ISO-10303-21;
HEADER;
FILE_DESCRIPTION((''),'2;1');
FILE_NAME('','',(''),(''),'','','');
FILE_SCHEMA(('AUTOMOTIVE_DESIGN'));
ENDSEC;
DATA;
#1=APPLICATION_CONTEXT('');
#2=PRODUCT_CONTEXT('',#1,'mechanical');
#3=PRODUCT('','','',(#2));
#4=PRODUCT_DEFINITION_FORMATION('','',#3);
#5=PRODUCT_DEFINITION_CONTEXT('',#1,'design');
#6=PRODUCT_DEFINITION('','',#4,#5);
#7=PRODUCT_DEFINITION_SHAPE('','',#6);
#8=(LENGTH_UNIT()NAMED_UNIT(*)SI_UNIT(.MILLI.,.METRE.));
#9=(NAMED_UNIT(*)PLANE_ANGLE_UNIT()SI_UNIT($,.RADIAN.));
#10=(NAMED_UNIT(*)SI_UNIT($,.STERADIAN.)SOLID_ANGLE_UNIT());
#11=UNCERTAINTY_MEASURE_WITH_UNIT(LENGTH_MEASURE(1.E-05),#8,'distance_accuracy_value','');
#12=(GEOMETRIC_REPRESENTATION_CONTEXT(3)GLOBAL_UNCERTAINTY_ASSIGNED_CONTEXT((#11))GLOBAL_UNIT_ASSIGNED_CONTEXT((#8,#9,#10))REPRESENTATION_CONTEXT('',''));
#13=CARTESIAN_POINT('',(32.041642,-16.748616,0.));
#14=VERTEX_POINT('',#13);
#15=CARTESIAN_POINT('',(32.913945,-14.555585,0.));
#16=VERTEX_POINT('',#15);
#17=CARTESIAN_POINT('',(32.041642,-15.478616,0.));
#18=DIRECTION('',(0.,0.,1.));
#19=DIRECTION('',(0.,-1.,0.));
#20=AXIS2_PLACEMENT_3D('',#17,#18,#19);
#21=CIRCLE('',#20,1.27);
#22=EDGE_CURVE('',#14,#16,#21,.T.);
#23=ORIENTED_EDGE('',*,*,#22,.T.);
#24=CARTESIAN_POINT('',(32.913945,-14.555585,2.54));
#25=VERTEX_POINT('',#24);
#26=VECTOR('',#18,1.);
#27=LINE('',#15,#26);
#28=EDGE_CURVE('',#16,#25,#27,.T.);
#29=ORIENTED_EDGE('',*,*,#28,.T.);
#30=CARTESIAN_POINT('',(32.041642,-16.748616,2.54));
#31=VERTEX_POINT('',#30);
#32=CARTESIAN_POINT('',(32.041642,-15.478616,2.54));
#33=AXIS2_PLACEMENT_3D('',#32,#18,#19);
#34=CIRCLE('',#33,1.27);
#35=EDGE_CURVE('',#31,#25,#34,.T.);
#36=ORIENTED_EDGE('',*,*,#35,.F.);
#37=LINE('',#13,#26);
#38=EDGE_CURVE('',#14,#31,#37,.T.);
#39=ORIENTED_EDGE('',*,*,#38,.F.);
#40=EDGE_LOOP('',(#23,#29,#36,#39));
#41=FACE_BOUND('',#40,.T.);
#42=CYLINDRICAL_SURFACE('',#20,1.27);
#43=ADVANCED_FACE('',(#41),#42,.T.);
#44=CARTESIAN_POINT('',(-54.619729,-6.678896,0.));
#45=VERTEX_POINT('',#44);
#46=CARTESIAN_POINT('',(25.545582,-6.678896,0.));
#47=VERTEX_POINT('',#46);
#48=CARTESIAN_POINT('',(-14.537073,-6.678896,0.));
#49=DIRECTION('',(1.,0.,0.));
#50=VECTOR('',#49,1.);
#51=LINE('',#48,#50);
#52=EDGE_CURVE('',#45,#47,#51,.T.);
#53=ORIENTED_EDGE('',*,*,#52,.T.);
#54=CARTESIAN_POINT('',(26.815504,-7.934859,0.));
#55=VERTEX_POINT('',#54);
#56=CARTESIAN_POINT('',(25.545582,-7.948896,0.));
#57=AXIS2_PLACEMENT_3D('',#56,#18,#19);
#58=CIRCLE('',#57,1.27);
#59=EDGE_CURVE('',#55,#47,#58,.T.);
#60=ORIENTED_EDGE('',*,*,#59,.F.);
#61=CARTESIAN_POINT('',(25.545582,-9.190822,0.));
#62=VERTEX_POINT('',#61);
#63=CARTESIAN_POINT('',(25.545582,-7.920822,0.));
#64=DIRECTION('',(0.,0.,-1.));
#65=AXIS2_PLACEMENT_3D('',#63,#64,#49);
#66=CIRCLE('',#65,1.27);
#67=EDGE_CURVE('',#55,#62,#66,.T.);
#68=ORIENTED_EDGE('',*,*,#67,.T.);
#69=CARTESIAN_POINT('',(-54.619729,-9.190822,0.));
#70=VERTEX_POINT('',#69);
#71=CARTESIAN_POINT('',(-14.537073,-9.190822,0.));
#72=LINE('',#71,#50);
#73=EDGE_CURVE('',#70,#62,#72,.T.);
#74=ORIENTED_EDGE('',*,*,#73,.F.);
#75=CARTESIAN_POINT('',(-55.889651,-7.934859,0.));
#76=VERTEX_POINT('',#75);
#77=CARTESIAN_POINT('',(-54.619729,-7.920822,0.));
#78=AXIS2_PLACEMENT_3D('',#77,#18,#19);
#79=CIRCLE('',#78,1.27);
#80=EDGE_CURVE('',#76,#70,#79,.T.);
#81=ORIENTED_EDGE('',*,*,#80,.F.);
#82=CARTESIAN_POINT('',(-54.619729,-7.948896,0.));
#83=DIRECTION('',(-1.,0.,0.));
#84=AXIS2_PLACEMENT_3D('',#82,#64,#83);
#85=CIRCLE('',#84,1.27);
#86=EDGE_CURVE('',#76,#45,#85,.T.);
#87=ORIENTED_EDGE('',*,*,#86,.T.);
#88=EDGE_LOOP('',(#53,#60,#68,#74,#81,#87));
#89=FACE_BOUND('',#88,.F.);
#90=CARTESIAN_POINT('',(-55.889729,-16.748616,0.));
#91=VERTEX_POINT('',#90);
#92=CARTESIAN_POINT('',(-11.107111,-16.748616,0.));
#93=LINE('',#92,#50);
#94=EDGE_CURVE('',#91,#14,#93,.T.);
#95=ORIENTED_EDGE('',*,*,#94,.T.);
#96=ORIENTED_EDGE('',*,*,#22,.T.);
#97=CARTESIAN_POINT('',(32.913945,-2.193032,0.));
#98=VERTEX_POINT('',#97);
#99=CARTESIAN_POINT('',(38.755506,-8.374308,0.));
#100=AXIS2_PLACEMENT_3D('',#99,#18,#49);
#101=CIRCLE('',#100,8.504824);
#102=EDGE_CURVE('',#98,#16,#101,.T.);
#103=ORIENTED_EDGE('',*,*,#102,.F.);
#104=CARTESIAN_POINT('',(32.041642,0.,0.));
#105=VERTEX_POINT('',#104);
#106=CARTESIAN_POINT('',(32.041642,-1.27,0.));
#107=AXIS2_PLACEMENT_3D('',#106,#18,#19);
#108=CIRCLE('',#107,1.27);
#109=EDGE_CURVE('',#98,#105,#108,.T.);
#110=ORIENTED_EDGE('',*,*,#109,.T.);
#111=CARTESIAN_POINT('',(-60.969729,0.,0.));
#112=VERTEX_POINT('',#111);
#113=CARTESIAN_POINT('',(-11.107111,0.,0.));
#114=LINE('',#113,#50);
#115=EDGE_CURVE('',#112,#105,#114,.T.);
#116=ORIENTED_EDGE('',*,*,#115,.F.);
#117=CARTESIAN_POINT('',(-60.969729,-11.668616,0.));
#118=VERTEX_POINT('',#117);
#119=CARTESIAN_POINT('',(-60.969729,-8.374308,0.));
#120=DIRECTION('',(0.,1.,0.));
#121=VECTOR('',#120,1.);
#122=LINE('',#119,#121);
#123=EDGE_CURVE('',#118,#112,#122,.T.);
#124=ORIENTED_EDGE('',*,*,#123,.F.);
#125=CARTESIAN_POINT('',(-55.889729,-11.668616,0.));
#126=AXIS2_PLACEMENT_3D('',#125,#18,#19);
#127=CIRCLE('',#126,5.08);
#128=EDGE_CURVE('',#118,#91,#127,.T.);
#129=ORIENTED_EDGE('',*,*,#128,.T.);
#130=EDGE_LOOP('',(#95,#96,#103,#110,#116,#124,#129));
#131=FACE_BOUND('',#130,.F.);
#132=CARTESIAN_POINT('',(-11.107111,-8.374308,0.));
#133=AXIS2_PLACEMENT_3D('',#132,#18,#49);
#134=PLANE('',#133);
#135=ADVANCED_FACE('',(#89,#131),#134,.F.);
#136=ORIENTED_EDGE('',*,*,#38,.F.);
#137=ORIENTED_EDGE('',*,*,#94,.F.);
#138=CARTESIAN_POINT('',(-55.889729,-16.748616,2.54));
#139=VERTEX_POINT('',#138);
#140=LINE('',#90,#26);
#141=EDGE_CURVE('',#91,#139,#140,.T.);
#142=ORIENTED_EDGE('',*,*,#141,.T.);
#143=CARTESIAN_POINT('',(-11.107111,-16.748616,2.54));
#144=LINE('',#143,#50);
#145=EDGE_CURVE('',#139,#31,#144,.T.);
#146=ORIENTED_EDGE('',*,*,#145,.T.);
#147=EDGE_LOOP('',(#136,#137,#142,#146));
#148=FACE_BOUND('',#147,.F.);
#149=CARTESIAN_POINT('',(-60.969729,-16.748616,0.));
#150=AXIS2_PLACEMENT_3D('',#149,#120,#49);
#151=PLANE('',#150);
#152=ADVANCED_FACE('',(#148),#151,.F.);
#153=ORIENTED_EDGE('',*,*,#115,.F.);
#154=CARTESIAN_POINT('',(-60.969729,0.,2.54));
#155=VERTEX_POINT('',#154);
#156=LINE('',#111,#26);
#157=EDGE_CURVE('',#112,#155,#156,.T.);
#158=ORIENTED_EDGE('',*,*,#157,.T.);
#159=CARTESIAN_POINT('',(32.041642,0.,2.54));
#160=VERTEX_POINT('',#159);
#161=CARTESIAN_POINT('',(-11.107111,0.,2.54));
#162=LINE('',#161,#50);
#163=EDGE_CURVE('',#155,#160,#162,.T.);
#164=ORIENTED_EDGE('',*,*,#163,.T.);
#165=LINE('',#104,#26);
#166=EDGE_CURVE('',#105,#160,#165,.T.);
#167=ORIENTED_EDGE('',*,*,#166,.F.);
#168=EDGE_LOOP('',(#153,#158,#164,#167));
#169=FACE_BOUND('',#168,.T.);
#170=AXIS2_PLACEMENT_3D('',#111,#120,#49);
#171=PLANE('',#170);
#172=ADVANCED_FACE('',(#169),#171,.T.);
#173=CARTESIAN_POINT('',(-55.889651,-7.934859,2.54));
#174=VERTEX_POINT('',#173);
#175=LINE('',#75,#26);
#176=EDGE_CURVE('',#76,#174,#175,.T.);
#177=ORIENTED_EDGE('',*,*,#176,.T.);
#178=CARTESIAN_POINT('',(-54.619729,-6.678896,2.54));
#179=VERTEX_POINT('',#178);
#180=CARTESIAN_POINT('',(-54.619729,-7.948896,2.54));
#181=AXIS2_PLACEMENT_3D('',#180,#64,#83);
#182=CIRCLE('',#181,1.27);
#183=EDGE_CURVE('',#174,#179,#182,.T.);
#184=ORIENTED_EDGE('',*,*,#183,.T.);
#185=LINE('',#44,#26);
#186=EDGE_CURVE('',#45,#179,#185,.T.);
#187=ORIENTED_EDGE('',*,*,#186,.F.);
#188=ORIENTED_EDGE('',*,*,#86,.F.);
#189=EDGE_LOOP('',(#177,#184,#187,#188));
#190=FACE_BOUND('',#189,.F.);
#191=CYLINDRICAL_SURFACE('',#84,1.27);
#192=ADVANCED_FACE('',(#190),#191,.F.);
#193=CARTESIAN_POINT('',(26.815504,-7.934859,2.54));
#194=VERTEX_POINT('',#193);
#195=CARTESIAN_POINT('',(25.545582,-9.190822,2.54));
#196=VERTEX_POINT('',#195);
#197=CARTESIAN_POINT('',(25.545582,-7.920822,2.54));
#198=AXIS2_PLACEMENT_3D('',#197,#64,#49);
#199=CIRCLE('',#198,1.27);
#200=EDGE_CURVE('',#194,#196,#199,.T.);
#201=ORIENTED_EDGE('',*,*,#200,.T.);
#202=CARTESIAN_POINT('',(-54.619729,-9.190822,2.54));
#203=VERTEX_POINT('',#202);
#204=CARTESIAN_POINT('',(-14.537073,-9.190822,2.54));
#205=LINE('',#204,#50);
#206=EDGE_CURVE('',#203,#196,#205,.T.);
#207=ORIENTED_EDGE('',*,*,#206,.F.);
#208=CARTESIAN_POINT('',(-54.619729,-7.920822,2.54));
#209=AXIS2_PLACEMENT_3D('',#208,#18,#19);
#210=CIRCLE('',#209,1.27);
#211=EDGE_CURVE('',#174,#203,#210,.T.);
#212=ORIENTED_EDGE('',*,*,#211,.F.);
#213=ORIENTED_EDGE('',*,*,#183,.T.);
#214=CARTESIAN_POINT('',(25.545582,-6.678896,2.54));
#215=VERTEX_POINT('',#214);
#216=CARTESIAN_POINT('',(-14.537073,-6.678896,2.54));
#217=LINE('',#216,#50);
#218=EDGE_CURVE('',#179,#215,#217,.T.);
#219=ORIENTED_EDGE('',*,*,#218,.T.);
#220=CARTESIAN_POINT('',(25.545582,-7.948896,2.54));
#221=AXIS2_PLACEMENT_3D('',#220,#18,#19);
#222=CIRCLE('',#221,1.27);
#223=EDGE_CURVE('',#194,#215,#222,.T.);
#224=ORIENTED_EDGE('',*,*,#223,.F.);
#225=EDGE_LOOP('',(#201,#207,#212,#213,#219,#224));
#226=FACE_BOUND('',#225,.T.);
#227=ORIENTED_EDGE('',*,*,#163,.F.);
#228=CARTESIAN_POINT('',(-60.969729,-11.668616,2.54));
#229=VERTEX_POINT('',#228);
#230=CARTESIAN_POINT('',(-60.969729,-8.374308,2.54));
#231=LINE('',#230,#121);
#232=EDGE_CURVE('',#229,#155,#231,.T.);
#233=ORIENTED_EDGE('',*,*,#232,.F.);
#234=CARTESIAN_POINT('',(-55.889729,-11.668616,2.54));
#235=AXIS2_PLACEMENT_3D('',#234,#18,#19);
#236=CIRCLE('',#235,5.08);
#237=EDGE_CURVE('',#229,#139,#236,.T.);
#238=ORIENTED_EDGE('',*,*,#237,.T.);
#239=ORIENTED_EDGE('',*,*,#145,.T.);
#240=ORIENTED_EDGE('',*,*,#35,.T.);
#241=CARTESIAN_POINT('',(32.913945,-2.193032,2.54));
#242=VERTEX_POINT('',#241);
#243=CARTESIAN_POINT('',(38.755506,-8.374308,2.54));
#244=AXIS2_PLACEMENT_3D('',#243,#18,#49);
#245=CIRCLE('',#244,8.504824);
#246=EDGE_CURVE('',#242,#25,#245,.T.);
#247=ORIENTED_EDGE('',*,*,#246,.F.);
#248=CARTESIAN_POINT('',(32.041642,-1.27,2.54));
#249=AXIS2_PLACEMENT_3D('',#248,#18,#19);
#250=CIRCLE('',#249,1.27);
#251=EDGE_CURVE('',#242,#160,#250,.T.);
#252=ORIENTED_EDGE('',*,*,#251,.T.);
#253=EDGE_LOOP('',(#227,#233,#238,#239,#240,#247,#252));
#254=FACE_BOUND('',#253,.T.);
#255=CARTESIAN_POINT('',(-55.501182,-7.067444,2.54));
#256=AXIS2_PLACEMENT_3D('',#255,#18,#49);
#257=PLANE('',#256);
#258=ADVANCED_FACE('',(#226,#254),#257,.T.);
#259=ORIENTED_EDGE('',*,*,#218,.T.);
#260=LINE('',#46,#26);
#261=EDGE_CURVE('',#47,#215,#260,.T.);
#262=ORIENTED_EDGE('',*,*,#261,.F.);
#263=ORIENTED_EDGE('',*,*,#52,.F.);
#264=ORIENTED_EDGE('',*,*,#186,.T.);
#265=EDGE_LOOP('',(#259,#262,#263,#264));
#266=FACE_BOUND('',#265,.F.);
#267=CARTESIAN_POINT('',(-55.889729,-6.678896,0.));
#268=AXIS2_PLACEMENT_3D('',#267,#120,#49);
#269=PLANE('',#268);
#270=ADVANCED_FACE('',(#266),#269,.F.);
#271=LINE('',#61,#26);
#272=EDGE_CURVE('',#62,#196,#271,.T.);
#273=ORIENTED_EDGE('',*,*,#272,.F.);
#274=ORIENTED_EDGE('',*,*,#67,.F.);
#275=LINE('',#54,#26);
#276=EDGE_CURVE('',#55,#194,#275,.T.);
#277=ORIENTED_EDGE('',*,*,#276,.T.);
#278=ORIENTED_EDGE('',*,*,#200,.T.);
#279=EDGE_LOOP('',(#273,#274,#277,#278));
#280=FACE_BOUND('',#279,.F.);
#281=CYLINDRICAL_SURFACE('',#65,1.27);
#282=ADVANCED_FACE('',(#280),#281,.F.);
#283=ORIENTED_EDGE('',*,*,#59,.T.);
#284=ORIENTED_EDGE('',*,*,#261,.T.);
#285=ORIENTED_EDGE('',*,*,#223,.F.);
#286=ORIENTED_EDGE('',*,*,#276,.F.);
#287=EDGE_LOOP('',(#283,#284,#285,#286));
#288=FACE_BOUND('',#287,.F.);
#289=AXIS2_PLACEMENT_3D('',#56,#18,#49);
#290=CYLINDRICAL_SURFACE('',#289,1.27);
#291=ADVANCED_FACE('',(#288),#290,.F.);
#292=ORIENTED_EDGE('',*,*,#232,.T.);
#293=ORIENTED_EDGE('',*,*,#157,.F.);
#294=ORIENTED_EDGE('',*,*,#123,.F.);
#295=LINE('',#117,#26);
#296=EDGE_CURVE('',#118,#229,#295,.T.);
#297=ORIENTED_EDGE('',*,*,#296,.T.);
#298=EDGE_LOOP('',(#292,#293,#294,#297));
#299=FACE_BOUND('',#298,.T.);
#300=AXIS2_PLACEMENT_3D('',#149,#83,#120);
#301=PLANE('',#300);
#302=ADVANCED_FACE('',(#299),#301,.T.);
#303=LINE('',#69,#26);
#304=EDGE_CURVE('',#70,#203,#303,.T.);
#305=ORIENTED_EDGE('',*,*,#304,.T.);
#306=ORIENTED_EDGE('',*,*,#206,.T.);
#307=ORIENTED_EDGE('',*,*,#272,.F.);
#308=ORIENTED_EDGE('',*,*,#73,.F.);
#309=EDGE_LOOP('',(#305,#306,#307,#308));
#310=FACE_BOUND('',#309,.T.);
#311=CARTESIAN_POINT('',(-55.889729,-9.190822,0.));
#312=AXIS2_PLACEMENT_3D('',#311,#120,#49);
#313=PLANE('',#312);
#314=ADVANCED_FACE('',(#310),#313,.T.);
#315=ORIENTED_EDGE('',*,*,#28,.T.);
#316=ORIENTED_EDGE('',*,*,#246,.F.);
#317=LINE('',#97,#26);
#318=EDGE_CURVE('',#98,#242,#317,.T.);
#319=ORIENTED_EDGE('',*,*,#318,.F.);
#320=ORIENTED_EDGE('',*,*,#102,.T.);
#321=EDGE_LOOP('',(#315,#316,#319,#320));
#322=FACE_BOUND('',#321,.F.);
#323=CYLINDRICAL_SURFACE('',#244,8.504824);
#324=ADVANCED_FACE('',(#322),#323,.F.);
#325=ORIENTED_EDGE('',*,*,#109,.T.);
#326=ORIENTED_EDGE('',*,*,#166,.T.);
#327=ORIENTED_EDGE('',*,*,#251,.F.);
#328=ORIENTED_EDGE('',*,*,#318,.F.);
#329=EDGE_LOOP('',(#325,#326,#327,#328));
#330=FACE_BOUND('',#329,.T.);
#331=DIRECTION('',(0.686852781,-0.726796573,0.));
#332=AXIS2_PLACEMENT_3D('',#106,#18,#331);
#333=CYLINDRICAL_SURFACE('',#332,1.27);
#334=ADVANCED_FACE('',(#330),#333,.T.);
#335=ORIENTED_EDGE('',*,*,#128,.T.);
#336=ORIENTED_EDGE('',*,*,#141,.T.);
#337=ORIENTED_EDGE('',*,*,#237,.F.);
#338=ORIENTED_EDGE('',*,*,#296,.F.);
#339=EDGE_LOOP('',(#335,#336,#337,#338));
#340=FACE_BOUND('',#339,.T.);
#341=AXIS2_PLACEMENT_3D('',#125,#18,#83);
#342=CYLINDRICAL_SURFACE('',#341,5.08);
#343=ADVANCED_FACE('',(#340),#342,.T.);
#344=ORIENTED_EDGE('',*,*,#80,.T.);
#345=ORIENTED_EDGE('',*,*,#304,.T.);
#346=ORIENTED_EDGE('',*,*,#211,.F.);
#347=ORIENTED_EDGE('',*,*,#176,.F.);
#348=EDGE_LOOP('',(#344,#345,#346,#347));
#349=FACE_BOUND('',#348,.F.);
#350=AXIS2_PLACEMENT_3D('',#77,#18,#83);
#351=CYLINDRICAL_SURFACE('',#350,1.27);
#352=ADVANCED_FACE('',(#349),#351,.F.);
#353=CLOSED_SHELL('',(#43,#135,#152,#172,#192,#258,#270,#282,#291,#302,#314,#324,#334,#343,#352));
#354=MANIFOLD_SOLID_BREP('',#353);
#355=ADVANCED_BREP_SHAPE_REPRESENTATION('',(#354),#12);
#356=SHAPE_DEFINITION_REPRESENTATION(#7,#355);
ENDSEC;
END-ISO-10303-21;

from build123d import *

# Parameters (mm, degrees)
F0_W         = 99.7252352536
F0_H         = 16.7486164719
F1_DEPTH     = 2.54
F2_R         = 5.08
F3_R         = 8.5048235264
F4_DEPTH     = 2.54
F5_W         = 82.7053110433
F5_H         = 2.5119255297
F6_DEPTH     = 2.54
F7_R         = 1.27
F8_T1_DEPTH  = 2.54
F9_R         = 1.27
F10_T1_DEPTH = 2.54
F11_R        = 1.27
F12_R        = 1.27


# Not quite as in the source:
# - a fillet or chamfer that OpenCascade refuses, or shapes differently, is made with other operations: its cross-section is extruded or revolved along the edge and cut away or added


with BuildPart() as f1:
    # F0 (on Top) → F1 (new body)
    with BuildSketch(Plane.XY):
        with Locations((-11.1071113497, -8.3743082359)):
            Rectangle(F0_W, F0_H)
    extrude(amount=F1_DEPTH)

    # F2
    f2_edges = [f1.edges().sort_by_distance(p)[0] for p in [
        (-60.969729, -16.748616, 1.27),
    ]]
    fillet(f2_edges, radius=F2_R)

    # F3 (on face) → F4 (cut)
    with BuildSketch(Plane.XY.offset(2.54)):
        with Locations((38.7555062771, -8.3743082359)):
            Circle(F3_R)
    extrude(amount=-F4_DEPTH, mode=Mode.SUBTRACT)

    # F5 (on face) → F6 (cut)
    with BuildSketch(Plane(origin=(0, 0, 0), x_dir=(1, 0, 0), z_dir=(0, 0, -1))):
        with Locations((-14.5370734549, 7.9348592553)):
            Rectangle(F5_W, F5_H)
    extrude(amount=-F6_DEPTH, mode=Mode.SUBTRACT)

    # F7
    f7_edges = [f1.edges().sort_by_distance(p)[0] for p in [
        (-55.889729, -9.190822, 1.27),
    ]]
    fillet(f7_edges, radius=F7_R)

    # F8: fillet of radius 1.27 on 1 edges, made by hand

    # F8_s2 → F8_t1 (join)
    with BuildSketch(Plane.XY):
        with BuildLine():
            ThreePointArc((-55.8897289765, -7.9488964905), (-55.5177545886, -7.0508708784), (-54.6197289765, -6.6788964905))
            Line((-54.6197289765, -6.6788964905), (-55.8897289765, -6.6788964905))
            Line((-55.8897289765, -6.6788964905), (-55.8897289765, -7.9488964905))
        make_face()
    extrude(amount=F8_T1_DEPTH)

    # F9
    f9_edges = [f1.edges().sort_by_distance(p)[0] for p in [
        (26.815582, -6.678896, 1.27),
    ]]
    fillet(f9_edges, radius=F9_R)

    # F10: fillet of radius 1.27 on 1 edges, made by hand

    # F10_s2 → F10_t1 (join)
    with BuildSketch(Plane.XY):
        with BuildLine():
            ThreePointArc((26.8155820668, -7.9208220202), (26.4436076789, -8.8188476323), (25.5455820668, -9.1908220202))
            Line((25.5455820668, -9.1908220202), (26.8155820668, -9.1908220202))
            Line((26.8155820668, -9.1908220202), (26.8155820668, -7.9208220202))
        make_face()
    extrude(amount=F10_T1_DEPTH)

    # F11
    f11_edges = [f1.edges().sort_by_distance(p)[0] for p in [
        (37.271261, -16.748616, 1.27),
    ]]
    fillet(f11_edges, radius=F11_R)

    # F12
    f12_edges = [f1.edges().sort_by_distance(p)[0] for p in [
        (37.271261, 0, 1.27),
    ]]
    fillet(f12_edges, radius=F12_R)


solid = f1.part
